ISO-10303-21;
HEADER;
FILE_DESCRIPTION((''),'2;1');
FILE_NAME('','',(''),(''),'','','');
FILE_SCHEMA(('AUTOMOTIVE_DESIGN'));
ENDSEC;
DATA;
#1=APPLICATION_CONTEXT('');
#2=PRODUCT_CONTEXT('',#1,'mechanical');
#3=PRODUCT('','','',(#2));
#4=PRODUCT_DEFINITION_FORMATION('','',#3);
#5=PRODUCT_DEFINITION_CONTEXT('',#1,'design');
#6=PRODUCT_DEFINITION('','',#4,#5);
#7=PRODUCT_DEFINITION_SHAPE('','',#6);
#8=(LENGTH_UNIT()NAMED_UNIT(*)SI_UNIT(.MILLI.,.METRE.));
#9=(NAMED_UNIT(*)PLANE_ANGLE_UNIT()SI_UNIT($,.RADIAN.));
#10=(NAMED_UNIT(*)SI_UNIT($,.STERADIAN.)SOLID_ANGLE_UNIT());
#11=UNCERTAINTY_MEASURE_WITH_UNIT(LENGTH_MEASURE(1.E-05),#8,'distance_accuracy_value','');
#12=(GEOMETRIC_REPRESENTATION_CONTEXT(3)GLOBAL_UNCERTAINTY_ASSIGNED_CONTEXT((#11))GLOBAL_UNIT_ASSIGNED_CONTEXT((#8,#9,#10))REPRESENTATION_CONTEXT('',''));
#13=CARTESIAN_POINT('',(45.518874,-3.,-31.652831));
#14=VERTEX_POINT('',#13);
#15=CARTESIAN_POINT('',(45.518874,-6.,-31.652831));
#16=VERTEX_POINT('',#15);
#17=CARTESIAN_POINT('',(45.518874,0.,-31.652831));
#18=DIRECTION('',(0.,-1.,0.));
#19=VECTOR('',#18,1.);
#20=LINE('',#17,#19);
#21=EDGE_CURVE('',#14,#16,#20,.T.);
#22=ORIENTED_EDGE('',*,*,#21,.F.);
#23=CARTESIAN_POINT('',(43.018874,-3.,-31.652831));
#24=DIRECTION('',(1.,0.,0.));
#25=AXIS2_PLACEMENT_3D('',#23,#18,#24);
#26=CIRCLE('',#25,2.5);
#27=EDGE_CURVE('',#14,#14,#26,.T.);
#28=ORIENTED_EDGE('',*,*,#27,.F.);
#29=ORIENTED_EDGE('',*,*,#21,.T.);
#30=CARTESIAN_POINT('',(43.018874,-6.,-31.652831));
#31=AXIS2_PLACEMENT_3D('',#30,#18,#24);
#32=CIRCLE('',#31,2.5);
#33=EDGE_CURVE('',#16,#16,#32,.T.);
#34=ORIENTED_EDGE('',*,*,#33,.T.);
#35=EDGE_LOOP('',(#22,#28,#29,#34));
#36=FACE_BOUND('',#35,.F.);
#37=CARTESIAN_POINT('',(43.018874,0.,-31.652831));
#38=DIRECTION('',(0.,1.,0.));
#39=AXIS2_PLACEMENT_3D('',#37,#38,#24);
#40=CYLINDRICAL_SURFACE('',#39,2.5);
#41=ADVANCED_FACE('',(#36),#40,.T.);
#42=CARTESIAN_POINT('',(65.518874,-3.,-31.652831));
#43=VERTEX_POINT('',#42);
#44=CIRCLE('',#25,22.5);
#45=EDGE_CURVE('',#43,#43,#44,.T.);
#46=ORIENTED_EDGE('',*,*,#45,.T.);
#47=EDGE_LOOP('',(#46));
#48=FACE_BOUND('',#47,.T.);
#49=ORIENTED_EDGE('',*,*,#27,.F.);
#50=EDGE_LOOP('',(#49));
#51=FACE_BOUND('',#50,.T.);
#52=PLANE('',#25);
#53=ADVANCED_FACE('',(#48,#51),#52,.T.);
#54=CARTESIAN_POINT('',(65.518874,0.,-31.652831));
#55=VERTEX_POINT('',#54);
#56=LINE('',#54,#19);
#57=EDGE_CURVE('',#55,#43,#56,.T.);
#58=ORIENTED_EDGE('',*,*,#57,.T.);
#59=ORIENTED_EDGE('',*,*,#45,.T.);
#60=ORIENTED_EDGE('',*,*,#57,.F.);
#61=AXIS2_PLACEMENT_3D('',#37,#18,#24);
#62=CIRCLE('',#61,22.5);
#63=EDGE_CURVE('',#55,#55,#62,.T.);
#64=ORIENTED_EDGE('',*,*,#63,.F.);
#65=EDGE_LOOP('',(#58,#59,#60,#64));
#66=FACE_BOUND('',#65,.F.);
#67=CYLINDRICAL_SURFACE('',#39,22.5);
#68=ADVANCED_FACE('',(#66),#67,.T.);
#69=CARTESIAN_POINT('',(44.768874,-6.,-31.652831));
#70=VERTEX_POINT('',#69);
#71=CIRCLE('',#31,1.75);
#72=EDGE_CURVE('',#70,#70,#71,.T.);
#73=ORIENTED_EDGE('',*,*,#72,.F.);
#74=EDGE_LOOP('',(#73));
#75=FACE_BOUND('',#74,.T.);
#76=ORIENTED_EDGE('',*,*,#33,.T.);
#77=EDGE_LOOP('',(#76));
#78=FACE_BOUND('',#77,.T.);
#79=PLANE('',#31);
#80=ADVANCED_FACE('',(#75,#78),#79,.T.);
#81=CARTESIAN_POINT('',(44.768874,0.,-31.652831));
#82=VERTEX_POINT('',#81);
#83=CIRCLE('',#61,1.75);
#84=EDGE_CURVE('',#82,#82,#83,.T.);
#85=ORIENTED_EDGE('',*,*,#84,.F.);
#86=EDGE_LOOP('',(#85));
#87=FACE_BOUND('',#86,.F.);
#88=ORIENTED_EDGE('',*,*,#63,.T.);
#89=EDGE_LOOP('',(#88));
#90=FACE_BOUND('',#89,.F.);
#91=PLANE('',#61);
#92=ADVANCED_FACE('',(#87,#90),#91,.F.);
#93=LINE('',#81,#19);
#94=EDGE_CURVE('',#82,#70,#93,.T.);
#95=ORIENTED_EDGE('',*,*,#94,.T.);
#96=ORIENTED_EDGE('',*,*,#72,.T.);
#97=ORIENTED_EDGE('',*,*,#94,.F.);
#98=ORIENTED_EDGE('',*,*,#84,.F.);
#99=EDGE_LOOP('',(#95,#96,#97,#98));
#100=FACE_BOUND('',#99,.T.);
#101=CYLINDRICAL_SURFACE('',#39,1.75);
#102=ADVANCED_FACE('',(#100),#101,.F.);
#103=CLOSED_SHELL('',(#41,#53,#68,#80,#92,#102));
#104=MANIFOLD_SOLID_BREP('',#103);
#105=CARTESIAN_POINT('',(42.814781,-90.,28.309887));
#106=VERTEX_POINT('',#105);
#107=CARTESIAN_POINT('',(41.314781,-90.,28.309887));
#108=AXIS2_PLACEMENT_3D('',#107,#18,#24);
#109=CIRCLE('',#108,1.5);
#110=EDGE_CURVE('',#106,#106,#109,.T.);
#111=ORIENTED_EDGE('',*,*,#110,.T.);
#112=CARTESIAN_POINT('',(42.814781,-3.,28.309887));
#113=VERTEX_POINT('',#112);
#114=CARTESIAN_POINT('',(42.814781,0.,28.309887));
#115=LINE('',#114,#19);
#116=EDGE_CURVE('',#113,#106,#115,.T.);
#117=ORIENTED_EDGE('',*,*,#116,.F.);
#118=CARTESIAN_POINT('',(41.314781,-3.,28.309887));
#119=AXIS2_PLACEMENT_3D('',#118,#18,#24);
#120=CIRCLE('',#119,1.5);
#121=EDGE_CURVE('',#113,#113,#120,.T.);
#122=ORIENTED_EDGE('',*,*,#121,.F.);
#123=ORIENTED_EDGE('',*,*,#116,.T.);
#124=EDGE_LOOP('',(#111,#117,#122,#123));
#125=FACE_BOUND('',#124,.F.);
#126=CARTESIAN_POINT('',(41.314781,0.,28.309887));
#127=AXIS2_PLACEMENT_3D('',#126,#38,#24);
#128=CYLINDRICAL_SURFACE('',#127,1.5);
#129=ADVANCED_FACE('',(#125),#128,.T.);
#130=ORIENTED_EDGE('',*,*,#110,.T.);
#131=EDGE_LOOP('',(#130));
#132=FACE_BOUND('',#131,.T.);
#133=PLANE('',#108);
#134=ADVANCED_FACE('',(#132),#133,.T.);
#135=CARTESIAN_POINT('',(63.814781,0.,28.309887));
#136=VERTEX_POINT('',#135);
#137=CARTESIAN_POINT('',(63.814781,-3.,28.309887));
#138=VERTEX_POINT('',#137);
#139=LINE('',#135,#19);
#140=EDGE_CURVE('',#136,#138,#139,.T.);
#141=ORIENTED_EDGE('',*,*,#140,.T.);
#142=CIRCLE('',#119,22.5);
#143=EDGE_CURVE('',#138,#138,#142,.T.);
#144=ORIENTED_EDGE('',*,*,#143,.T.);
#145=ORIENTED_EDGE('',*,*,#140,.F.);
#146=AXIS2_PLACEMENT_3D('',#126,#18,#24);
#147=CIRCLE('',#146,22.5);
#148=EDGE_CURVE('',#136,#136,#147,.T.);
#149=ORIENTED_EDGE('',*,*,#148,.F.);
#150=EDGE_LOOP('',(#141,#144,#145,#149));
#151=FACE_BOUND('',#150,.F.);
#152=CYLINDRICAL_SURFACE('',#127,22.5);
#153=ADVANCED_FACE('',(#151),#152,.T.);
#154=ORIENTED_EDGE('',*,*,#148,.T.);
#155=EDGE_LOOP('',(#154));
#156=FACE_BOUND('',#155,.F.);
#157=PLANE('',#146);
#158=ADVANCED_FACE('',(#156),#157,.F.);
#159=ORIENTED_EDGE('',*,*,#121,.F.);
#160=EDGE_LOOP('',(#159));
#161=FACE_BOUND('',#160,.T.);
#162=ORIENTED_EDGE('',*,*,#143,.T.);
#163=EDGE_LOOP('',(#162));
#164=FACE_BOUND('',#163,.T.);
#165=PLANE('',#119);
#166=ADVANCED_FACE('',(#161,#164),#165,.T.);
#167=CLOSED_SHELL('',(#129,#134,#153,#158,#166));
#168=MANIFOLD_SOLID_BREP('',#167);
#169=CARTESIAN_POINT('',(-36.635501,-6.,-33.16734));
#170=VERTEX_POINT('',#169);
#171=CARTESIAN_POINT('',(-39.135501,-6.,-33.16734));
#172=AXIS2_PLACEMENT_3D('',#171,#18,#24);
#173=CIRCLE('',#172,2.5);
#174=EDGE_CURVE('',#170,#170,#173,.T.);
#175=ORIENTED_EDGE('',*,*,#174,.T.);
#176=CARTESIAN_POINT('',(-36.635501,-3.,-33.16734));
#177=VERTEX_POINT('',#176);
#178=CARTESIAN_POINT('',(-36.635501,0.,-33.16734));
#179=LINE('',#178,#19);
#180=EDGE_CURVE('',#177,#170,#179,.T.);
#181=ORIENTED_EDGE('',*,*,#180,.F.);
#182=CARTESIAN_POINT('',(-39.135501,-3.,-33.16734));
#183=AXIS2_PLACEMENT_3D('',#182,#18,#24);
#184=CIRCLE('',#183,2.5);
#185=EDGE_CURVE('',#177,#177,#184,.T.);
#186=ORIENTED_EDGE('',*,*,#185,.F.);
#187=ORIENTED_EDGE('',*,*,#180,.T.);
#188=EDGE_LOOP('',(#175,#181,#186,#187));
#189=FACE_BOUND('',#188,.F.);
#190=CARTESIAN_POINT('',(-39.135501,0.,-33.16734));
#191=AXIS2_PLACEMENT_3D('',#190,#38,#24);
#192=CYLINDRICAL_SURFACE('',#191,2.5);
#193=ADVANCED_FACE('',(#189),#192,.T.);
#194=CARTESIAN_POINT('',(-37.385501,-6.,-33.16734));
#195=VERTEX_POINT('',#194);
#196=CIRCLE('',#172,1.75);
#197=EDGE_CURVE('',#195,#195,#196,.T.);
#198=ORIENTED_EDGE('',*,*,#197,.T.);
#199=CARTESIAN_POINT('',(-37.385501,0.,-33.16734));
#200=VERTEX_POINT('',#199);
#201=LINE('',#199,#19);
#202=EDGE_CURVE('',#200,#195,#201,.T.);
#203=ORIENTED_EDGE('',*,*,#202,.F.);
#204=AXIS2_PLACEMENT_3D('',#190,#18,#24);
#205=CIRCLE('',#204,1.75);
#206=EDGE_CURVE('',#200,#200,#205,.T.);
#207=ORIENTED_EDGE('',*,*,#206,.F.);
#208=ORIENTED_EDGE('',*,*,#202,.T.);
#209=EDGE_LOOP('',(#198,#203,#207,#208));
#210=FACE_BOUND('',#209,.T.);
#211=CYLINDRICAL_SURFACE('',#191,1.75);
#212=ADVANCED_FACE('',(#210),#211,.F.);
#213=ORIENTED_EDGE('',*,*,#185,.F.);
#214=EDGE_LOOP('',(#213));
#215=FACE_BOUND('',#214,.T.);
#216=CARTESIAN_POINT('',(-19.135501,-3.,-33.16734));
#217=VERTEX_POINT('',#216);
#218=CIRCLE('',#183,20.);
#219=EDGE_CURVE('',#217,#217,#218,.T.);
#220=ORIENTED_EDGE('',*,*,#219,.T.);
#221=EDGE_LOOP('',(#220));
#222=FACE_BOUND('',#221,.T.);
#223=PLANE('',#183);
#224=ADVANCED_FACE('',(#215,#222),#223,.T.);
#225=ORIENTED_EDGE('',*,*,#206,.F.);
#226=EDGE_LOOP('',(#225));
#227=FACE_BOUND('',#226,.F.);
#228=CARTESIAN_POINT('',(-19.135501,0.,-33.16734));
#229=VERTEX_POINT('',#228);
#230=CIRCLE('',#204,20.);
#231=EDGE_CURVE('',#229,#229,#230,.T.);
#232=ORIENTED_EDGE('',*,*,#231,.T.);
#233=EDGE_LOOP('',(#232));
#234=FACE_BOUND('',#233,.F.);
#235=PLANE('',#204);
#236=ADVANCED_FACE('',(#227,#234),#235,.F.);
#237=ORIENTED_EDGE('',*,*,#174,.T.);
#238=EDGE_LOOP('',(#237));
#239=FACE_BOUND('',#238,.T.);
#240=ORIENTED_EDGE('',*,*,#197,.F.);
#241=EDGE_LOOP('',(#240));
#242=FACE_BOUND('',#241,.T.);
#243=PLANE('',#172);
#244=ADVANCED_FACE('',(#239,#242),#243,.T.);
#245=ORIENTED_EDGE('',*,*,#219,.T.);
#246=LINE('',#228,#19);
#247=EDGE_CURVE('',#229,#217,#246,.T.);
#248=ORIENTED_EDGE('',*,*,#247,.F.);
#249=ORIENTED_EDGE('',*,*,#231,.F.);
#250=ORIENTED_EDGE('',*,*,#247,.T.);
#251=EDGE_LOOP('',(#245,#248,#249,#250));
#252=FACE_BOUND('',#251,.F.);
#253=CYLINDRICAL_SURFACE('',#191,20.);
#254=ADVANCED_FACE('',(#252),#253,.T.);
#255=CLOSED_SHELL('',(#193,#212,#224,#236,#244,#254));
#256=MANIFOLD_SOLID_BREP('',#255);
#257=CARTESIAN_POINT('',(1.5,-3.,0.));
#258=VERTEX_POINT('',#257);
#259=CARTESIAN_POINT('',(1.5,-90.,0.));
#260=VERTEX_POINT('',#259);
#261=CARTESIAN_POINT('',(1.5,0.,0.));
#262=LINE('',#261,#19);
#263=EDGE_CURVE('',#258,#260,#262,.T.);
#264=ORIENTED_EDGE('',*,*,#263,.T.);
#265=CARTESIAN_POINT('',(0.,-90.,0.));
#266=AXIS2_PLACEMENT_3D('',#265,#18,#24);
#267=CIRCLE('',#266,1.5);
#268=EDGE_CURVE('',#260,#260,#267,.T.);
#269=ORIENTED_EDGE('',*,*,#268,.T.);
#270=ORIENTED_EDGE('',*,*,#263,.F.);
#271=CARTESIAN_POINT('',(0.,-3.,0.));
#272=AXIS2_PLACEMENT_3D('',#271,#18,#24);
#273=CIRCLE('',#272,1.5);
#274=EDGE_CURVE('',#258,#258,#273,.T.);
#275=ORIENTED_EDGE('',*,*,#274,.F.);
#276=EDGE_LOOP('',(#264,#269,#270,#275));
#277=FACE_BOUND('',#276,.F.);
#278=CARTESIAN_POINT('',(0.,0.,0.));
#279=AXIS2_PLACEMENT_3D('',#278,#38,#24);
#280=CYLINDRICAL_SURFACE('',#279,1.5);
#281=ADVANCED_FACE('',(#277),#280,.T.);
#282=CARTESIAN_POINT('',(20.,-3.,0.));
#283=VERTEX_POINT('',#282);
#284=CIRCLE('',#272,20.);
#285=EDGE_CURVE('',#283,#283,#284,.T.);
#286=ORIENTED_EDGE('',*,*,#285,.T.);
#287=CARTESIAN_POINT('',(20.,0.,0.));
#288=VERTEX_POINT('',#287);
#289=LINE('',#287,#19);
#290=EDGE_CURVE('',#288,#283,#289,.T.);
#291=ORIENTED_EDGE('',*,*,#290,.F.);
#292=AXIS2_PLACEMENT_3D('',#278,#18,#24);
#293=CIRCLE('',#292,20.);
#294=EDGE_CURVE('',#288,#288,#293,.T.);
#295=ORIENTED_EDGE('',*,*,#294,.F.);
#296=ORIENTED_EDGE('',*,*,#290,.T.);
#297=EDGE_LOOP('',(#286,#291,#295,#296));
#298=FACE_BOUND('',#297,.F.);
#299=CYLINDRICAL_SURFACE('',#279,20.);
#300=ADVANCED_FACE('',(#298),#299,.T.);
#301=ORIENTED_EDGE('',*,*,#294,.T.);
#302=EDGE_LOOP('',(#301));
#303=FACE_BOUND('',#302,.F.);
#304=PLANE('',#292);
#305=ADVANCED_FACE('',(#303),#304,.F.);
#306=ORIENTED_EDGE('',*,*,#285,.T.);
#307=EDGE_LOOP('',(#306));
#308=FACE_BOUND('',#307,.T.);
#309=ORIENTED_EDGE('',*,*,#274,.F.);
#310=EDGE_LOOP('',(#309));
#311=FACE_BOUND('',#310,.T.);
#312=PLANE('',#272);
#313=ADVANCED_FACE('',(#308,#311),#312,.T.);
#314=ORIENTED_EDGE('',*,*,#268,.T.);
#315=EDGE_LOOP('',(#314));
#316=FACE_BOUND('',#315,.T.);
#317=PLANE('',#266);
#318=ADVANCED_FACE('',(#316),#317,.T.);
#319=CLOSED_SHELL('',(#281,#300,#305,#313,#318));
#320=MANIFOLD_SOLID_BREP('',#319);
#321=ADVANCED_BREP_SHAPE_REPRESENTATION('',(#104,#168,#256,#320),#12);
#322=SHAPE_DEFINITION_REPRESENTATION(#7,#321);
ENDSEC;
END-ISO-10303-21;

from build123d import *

# Parameters (mm, degrees)
F0_R     = 20
F0_R_2   = 1.5
F1_DEPTH = 3
F0_R_3   = 2.5
F0_R_4   = 22.5
F2_DEPTH = 90
F0_R_5   = 1.75
F3_DEPTH = 6
F4_DEPTH = 90


# Not quite as in the source:
# - a feature names something its author has since deleted; it is built from what else it names


with BuildPart() as f1:
    # F0 (on Front) → F1 (new body)
    with BuildSketch(Plane.XZ):
        Circle(F0_R)
        Circle(F0_R_2, mode=Mode.SUBTRACT)
    extrude(amount=F1_DEPTH)

    # F0 (on Front) → F2 (join)
    with BuildSketch(Plane.XZ):
        Circle(F0_R_2)
    extrude(amount=F2_DEPTH)


with BuildPart() as f1b:
    # F0 (on Front) → F1, piece 2 (new body)
    with BuildSketch(Plane.XZ):
        with Locations((-39.1355007887, -33.1673398614)):
            Circle(F0_R)
        with Locations((-39.1355007887, -33.1673398614)):
            Circle(F0_R_3, mode=Mode.SUBTRACT)
    extrude(amount=F1_DEPTH)

    # F0 (on Front) → F3 (join)
    with BuildSketch(Plane.XZ):
        with Locations((-39.1355007887, -33.1673398614)):
            Circle(F0_R_3)
        with Locations((-39.1355007887, -33.1673398614)):
            Circle(F0_R_5, mode=Mode.SUBTRACT)
    extrude(amount=F3_DEPTH)


with BuildPart() as f1c:
    # F0 (on Front) → F1, piece 3 (new body)
    with BuildSketch(Plane.XZ):
        with Locations((43.018873781, -31.6528305411)):
            Circle(F0_R_4)
        with Locations((43.018873781, -31.6528305411)):
            Circle(F0_R_3, mode=Mode.SUBTRACT)
    extrude(amount=F1_DEPTH)

    # F0 (on Front) → F3, piece 2 (join)
    with BuildSketch(Plane.XZ):
        with Locations((43.018873781, -31.6528305411)):
            Circle(F0_R_3)
        with Locations((43.018873781, -31.6528305411)):
            Circle(F0_R_5, mode=Mode.SUBTRACT)
    extrude(amount=F3_DEPTH)


with BuildPart() as f1d:
    # F0 (on Front) → F1, piece 4 (new body)
    with BuildSketch(Plane.XZ):
        with Locations((41.3147807121, 28.3098872751)):
            Circle(F0_R_4)
        with Locations((41.3147807121, 28.3098872751)):
            Circle(F0_R_2, mode=Mode.SUBTRACT)
    extrude(amount=F1_DEPTH)

    # F0 (on Front) → F4 (join)
    with BuildSketch(Plane.XZ):
        with Locations((41.3147807121, 28.3098872751)):
            Circle(F0_R_2)
    extrude(amount=F4_DEPTH)


solid = Compound([f1.part, f1b.part, f1c.part, f1d.part])
